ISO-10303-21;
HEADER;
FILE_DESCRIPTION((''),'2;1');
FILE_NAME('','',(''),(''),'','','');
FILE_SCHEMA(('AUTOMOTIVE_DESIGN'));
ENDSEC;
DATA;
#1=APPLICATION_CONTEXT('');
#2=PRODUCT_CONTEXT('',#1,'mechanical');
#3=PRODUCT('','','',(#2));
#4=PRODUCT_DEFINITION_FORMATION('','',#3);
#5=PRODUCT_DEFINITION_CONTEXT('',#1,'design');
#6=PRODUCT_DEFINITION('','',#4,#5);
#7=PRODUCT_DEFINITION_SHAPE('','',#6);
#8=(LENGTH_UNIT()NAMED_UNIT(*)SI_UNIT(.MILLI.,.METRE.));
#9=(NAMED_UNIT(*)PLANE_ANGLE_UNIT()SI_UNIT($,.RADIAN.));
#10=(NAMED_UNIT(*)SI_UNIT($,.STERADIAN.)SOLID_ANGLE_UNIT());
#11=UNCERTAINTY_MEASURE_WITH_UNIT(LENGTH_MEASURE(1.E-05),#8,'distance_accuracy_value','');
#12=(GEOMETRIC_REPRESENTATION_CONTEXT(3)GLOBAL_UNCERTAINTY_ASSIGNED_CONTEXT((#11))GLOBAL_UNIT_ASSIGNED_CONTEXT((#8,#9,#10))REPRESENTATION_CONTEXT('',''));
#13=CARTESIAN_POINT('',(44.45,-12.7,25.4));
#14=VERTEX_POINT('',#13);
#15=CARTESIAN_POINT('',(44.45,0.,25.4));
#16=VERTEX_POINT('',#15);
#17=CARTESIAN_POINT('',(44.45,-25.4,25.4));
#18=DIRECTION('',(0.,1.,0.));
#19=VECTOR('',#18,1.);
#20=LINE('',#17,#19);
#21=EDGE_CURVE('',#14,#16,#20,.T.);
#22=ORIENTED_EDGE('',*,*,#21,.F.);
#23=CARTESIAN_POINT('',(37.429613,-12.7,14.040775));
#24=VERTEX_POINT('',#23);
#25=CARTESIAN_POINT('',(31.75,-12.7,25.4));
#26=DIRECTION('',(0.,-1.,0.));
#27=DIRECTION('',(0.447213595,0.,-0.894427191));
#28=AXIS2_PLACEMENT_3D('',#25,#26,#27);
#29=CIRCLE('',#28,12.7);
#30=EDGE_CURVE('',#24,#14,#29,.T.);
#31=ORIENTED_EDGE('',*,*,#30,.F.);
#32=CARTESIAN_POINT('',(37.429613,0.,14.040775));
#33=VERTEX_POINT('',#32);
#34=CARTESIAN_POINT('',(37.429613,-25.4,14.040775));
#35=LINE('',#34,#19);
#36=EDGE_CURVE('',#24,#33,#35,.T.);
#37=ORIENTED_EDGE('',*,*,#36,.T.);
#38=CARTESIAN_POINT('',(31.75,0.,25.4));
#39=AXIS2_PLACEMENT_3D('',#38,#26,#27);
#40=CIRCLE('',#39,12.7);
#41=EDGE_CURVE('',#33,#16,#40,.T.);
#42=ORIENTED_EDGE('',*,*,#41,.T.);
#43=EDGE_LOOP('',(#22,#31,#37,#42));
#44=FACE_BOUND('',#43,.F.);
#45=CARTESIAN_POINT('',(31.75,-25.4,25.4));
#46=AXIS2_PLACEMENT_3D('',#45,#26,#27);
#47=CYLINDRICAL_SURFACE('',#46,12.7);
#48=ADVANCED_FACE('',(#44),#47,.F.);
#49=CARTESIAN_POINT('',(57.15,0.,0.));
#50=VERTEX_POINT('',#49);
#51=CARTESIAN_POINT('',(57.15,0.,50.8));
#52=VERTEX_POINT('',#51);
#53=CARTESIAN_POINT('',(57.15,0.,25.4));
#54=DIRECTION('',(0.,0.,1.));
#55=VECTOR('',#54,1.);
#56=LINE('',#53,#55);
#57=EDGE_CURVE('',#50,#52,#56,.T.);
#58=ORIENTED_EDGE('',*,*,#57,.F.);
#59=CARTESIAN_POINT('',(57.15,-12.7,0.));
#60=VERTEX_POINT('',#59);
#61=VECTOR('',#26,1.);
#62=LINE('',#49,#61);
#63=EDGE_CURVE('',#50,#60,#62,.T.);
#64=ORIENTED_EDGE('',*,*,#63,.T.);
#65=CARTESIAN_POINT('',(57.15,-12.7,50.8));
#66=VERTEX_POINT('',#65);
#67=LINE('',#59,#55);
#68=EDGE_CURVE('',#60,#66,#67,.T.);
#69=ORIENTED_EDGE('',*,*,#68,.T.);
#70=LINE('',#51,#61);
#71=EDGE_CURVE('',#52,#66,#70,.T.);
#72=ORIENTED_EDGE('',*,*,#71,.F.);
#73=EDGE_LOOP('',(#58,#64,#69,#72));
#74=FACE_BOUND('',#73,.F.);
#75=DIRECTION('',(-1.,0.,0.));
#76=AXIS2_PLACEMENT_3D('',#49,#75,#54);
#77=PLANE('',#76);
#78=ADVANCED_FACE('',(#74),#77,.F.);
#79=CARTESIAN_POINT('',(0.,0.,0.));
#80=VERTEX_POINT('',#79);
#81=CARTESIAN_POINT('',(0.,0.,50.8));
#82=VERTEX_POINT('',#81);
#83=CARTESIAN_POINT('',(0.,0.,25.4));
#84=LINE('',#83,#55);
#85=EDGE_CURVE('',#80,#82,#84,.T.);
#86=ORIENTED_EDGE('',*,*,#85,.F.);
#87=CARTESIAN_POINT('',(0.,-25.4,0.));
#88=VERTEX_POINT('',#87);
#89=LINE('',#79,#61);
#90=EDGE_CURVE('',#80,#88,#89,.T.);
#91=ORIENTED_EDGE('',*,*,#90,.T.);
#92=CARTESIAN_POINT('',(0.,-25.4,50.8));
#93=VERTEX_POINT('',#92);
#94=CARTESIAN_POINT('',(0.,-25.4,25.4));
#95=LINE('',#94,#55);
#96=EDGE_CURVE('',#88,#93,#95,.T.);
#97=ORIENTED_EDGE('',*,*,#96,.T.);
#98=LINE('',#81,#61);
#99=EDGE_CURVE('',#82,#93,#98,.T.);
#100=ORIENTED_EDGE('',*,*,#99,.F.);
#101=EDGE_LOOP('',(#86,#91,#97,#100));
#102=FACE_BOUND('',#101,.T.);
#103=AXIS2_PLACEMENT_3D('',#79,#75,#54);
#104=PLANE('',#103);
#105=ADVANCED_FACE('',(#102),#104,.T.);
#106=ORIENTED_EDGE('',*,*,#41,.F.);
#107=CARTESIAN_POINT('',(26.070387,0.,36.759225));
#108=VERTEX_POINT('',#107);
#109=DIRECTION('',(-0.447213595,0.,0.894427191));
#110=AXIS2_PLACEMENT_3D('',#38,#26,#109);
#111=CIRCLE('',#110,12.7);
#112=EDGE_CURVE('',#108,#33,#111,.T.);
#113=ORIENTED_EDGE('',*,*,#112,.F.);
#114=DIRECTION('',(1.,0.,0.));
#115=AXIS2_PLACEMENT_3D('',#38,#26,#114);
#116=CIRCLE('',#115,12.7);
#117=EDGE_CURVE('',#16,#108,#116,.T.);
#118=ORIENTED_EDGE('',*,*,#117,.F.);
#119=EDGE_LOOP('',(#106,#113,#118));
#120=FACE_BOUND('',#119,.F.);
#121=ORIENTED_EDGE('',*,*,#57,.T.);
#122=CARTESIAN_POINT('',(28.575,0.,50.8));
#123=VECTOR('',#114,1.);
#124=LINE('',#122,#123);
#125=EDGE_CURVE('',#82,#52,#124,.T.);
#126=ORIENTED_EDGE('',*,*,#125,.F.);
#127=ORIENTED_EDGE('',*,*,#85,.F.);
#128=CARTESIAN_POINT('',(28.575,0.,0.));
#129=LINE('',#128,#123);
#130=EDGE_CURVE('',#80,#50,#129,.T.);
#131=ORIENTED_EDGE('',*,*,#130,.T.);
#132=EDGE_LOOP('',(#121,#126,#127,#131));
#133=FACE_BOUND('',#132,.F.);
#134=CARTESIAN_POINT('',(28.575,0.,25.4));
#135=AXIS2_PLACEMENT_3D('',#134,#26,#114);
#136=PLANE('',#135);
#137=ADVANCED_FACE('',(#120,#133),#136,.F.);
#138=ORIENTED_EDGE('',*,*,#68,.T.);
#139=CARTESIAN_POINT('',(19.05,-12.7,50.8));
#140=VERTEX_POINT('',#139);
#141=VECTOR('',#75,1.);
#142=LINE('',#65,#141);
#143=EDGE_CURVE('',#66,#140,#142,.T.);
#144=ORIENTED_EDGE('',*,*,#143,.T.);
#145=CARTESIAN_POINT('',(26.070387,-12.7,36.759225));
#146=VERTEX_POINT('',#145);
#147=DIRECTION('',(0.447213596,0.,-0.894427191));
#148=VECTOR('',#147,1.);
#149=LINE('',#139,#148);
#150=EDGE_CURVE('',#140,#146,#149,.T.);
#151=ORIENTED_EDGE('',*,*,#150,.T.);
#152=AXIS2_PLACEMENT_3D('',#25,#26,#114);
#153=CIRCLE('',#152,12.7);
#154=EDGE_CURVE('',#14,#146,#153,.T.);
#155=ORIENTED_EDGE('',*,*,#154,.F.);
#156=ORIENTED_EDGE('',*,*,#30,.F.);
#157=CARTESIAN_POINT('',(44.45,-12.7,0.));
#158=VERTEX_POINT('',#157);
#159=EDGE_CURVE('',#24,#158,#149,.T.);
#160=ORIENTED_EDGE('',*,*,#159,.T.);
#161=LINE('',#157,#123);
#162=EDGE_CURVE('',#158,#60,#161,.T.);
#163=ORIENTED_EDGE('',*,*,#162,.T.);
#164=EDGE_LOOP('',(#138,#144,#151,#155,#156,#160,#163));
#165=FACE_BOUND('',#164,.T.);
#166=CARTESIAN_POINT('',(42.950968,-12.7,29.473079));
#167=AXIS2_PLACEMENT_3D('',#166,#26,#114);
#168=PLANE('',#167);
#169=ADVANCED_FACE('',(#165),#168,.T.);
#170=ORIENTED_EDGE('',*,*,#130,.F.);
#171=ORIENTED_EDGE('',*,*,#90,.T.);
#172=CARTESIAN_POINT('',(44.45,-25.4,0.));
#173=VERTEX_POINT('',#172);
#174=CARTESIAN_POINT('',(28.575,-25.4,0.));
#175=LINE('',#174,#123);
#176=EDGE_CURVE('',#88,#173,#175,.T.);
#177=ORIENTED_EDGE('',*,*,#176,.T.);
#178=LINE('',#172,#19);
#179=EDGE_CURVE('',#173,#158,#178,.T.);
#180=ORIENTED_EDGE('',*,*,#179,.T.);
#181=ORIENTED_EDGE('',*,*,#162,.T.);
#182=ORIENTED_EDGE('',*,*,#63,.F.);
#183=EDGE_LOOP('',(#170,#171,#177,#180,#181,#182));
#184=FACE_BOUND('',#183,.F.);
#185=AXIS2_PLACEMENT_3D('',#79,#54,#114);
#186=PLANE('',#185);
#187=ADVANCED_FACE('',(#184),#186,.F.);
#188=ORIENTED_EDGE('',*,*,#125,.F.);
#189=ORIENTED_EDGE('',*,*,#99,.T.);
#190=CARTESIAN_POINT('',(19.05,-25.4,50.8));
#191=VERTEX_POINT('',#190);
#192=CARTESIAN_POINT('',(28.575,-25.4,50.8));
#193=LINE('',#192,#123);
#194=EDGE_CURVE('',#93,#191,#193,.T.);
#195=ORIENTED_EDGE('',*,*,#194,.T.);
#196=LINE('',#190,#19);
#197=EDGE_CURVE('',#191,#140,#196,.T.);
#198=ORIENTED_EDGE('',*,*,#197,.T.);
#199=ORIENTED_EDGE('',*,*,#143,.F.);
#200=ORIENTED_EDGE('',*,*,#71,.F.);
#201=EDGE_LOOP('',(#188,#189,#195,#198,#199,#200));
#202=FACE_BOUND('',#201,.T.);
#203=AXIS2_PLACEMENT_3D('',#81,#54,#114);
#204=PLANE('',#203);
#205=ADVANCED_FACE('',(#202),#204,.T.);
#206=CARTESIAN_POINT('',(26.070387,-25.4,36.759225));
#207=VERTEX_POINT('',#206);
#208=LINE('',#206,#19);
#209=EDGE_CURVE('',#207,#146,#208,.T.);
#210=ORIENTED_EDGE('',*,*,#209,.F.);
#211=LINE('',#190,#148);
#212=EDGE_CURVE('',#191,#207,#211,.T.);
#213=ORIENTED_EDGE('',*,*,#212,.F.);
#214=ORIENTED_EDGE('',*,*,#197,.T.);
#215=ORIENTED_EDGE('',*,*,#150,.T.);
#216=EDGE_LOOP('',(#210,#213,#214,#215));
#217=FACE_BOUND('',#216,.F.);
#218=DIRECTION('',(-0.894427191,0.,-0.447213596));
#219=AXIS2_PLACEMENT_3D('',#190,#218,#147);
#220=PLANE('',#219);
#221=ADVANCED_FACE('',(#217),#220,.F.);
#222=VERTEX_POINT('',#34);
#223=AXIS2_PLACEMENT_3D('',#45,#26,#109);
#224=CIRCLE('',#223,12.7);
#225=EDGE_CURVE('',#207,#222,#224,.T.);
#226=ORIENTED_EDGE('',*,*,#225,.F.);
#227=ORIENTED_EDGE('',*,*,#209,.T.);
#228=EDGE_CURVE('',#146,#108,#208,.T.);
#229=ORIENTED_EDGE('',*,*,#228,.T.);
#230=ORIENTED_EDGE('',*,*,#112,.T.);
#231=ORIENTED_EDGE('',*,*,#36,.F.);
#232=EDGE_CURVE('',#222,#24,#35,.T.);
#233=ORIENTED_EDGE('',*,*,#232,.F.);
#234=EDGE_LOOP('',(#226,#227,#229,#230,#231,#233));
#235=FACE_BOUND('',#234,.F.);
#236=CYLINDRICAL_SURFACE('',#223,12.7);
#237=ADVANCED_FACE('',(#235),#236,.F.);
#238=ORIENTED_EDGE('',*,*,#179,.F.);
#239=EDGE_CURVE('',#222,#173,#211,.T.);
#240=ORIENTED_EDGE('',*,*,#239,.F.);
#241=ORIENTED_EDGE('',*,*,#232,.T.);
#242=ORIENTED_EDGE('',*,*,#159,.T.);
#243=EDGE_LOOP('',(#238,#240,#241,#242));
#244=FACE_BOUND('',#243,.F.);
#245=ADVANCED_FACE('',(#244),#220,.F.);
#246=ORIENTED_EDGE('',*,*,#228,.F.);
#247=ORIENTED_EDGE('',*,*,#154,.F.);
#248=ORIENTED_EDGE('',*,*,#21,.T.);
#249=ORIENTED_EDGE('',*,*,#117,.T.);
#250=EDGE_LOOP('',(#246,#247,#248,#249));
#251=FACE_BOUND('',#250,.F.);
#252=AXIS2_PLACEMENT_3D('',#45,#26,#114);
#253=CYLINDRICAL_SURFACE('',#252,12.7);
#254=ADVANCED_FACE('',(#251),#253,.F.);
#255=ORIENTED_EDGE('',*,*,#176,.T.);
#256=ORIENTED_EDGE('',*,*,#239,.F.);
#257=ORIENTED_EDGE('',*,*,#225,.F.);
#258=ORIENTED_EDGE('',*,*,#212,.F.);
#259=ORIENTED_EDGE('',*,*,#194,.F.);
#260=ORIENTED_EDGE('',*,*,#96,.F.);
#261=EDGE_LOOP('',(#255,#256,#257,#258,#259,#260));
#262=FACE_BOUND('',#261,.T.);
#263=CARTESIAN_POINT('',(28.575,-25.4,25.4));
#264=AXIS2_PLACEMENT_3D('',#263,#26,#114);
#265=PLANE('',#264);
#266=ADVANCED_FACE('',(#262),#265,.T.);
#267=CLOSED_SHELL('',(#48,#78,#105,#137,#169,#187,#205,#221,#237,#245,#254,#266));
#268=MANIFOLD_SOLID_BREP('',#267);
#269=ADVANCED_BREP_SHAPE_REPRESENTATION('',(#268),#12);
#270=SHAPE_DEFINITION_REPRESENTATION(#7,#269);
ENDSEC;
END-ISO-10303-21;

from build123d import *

# Parameters (mm, degrees)
F0_W     = 57.15
F0_H     = 50.8
F1_DEPTH = 25.4
F3_DEPTH = 12.7
F5_DEPTH = 25.4


# Not quite as in the source:
# - a feature of the source that left no trace in its solid (it failed there, or was rolled back) is left out


with BuildPart() as f1:
    # F0 (on Front) → F1 (new body)
    with BuildSketch(Plane.XZ):
        with Locations((28.575, 25.4)):
            Rectangle(F0_W, F0_H)
    extrude(amount=F1_DEPTH)

    # F2 (on face) → F3 (cut)
    with BuildSketch(Plane.XZ.offset(25.4)):
        Polygon((44.45, 0), (57.15, 0), (57.15, 50.8), (19.05, 50.8), align=None)
    extrude(amount=-F3_DEPTH, mode=Mode.SUBTRACT)

    # F4 (on face) → F5 (cut)
    with BuildSketch(Plane.XZ.offset(25.4)):
        with BuildLine():
            ThreePointArc((37.4296126628, 14.0407746743), (42.5532652661, 18.7232148761), (44.45, 25.4))
            ThreePointArc((44.45, 25.4), (38.4267851239, 36.2032652661), (26.0703873372, 36.7592253257))
            Line((26.0703873372, 36.7592253257), (37.4296126628, 14.0407746743))
        make_face()
        with BuildLine():
            Line((37.4296126628, 14.0407746743), (26.0703873372, 36.7592253257))
            ThreePointArc((26.0703873372, 36.7592253257), (20.3907746743, 19.7203873372), (37.4296126628, 14.0407746743))
        make_face()
    extrude(amount=-F5_DEPTH, mode=Mode.SUBTRACT)


solid = f1.part
